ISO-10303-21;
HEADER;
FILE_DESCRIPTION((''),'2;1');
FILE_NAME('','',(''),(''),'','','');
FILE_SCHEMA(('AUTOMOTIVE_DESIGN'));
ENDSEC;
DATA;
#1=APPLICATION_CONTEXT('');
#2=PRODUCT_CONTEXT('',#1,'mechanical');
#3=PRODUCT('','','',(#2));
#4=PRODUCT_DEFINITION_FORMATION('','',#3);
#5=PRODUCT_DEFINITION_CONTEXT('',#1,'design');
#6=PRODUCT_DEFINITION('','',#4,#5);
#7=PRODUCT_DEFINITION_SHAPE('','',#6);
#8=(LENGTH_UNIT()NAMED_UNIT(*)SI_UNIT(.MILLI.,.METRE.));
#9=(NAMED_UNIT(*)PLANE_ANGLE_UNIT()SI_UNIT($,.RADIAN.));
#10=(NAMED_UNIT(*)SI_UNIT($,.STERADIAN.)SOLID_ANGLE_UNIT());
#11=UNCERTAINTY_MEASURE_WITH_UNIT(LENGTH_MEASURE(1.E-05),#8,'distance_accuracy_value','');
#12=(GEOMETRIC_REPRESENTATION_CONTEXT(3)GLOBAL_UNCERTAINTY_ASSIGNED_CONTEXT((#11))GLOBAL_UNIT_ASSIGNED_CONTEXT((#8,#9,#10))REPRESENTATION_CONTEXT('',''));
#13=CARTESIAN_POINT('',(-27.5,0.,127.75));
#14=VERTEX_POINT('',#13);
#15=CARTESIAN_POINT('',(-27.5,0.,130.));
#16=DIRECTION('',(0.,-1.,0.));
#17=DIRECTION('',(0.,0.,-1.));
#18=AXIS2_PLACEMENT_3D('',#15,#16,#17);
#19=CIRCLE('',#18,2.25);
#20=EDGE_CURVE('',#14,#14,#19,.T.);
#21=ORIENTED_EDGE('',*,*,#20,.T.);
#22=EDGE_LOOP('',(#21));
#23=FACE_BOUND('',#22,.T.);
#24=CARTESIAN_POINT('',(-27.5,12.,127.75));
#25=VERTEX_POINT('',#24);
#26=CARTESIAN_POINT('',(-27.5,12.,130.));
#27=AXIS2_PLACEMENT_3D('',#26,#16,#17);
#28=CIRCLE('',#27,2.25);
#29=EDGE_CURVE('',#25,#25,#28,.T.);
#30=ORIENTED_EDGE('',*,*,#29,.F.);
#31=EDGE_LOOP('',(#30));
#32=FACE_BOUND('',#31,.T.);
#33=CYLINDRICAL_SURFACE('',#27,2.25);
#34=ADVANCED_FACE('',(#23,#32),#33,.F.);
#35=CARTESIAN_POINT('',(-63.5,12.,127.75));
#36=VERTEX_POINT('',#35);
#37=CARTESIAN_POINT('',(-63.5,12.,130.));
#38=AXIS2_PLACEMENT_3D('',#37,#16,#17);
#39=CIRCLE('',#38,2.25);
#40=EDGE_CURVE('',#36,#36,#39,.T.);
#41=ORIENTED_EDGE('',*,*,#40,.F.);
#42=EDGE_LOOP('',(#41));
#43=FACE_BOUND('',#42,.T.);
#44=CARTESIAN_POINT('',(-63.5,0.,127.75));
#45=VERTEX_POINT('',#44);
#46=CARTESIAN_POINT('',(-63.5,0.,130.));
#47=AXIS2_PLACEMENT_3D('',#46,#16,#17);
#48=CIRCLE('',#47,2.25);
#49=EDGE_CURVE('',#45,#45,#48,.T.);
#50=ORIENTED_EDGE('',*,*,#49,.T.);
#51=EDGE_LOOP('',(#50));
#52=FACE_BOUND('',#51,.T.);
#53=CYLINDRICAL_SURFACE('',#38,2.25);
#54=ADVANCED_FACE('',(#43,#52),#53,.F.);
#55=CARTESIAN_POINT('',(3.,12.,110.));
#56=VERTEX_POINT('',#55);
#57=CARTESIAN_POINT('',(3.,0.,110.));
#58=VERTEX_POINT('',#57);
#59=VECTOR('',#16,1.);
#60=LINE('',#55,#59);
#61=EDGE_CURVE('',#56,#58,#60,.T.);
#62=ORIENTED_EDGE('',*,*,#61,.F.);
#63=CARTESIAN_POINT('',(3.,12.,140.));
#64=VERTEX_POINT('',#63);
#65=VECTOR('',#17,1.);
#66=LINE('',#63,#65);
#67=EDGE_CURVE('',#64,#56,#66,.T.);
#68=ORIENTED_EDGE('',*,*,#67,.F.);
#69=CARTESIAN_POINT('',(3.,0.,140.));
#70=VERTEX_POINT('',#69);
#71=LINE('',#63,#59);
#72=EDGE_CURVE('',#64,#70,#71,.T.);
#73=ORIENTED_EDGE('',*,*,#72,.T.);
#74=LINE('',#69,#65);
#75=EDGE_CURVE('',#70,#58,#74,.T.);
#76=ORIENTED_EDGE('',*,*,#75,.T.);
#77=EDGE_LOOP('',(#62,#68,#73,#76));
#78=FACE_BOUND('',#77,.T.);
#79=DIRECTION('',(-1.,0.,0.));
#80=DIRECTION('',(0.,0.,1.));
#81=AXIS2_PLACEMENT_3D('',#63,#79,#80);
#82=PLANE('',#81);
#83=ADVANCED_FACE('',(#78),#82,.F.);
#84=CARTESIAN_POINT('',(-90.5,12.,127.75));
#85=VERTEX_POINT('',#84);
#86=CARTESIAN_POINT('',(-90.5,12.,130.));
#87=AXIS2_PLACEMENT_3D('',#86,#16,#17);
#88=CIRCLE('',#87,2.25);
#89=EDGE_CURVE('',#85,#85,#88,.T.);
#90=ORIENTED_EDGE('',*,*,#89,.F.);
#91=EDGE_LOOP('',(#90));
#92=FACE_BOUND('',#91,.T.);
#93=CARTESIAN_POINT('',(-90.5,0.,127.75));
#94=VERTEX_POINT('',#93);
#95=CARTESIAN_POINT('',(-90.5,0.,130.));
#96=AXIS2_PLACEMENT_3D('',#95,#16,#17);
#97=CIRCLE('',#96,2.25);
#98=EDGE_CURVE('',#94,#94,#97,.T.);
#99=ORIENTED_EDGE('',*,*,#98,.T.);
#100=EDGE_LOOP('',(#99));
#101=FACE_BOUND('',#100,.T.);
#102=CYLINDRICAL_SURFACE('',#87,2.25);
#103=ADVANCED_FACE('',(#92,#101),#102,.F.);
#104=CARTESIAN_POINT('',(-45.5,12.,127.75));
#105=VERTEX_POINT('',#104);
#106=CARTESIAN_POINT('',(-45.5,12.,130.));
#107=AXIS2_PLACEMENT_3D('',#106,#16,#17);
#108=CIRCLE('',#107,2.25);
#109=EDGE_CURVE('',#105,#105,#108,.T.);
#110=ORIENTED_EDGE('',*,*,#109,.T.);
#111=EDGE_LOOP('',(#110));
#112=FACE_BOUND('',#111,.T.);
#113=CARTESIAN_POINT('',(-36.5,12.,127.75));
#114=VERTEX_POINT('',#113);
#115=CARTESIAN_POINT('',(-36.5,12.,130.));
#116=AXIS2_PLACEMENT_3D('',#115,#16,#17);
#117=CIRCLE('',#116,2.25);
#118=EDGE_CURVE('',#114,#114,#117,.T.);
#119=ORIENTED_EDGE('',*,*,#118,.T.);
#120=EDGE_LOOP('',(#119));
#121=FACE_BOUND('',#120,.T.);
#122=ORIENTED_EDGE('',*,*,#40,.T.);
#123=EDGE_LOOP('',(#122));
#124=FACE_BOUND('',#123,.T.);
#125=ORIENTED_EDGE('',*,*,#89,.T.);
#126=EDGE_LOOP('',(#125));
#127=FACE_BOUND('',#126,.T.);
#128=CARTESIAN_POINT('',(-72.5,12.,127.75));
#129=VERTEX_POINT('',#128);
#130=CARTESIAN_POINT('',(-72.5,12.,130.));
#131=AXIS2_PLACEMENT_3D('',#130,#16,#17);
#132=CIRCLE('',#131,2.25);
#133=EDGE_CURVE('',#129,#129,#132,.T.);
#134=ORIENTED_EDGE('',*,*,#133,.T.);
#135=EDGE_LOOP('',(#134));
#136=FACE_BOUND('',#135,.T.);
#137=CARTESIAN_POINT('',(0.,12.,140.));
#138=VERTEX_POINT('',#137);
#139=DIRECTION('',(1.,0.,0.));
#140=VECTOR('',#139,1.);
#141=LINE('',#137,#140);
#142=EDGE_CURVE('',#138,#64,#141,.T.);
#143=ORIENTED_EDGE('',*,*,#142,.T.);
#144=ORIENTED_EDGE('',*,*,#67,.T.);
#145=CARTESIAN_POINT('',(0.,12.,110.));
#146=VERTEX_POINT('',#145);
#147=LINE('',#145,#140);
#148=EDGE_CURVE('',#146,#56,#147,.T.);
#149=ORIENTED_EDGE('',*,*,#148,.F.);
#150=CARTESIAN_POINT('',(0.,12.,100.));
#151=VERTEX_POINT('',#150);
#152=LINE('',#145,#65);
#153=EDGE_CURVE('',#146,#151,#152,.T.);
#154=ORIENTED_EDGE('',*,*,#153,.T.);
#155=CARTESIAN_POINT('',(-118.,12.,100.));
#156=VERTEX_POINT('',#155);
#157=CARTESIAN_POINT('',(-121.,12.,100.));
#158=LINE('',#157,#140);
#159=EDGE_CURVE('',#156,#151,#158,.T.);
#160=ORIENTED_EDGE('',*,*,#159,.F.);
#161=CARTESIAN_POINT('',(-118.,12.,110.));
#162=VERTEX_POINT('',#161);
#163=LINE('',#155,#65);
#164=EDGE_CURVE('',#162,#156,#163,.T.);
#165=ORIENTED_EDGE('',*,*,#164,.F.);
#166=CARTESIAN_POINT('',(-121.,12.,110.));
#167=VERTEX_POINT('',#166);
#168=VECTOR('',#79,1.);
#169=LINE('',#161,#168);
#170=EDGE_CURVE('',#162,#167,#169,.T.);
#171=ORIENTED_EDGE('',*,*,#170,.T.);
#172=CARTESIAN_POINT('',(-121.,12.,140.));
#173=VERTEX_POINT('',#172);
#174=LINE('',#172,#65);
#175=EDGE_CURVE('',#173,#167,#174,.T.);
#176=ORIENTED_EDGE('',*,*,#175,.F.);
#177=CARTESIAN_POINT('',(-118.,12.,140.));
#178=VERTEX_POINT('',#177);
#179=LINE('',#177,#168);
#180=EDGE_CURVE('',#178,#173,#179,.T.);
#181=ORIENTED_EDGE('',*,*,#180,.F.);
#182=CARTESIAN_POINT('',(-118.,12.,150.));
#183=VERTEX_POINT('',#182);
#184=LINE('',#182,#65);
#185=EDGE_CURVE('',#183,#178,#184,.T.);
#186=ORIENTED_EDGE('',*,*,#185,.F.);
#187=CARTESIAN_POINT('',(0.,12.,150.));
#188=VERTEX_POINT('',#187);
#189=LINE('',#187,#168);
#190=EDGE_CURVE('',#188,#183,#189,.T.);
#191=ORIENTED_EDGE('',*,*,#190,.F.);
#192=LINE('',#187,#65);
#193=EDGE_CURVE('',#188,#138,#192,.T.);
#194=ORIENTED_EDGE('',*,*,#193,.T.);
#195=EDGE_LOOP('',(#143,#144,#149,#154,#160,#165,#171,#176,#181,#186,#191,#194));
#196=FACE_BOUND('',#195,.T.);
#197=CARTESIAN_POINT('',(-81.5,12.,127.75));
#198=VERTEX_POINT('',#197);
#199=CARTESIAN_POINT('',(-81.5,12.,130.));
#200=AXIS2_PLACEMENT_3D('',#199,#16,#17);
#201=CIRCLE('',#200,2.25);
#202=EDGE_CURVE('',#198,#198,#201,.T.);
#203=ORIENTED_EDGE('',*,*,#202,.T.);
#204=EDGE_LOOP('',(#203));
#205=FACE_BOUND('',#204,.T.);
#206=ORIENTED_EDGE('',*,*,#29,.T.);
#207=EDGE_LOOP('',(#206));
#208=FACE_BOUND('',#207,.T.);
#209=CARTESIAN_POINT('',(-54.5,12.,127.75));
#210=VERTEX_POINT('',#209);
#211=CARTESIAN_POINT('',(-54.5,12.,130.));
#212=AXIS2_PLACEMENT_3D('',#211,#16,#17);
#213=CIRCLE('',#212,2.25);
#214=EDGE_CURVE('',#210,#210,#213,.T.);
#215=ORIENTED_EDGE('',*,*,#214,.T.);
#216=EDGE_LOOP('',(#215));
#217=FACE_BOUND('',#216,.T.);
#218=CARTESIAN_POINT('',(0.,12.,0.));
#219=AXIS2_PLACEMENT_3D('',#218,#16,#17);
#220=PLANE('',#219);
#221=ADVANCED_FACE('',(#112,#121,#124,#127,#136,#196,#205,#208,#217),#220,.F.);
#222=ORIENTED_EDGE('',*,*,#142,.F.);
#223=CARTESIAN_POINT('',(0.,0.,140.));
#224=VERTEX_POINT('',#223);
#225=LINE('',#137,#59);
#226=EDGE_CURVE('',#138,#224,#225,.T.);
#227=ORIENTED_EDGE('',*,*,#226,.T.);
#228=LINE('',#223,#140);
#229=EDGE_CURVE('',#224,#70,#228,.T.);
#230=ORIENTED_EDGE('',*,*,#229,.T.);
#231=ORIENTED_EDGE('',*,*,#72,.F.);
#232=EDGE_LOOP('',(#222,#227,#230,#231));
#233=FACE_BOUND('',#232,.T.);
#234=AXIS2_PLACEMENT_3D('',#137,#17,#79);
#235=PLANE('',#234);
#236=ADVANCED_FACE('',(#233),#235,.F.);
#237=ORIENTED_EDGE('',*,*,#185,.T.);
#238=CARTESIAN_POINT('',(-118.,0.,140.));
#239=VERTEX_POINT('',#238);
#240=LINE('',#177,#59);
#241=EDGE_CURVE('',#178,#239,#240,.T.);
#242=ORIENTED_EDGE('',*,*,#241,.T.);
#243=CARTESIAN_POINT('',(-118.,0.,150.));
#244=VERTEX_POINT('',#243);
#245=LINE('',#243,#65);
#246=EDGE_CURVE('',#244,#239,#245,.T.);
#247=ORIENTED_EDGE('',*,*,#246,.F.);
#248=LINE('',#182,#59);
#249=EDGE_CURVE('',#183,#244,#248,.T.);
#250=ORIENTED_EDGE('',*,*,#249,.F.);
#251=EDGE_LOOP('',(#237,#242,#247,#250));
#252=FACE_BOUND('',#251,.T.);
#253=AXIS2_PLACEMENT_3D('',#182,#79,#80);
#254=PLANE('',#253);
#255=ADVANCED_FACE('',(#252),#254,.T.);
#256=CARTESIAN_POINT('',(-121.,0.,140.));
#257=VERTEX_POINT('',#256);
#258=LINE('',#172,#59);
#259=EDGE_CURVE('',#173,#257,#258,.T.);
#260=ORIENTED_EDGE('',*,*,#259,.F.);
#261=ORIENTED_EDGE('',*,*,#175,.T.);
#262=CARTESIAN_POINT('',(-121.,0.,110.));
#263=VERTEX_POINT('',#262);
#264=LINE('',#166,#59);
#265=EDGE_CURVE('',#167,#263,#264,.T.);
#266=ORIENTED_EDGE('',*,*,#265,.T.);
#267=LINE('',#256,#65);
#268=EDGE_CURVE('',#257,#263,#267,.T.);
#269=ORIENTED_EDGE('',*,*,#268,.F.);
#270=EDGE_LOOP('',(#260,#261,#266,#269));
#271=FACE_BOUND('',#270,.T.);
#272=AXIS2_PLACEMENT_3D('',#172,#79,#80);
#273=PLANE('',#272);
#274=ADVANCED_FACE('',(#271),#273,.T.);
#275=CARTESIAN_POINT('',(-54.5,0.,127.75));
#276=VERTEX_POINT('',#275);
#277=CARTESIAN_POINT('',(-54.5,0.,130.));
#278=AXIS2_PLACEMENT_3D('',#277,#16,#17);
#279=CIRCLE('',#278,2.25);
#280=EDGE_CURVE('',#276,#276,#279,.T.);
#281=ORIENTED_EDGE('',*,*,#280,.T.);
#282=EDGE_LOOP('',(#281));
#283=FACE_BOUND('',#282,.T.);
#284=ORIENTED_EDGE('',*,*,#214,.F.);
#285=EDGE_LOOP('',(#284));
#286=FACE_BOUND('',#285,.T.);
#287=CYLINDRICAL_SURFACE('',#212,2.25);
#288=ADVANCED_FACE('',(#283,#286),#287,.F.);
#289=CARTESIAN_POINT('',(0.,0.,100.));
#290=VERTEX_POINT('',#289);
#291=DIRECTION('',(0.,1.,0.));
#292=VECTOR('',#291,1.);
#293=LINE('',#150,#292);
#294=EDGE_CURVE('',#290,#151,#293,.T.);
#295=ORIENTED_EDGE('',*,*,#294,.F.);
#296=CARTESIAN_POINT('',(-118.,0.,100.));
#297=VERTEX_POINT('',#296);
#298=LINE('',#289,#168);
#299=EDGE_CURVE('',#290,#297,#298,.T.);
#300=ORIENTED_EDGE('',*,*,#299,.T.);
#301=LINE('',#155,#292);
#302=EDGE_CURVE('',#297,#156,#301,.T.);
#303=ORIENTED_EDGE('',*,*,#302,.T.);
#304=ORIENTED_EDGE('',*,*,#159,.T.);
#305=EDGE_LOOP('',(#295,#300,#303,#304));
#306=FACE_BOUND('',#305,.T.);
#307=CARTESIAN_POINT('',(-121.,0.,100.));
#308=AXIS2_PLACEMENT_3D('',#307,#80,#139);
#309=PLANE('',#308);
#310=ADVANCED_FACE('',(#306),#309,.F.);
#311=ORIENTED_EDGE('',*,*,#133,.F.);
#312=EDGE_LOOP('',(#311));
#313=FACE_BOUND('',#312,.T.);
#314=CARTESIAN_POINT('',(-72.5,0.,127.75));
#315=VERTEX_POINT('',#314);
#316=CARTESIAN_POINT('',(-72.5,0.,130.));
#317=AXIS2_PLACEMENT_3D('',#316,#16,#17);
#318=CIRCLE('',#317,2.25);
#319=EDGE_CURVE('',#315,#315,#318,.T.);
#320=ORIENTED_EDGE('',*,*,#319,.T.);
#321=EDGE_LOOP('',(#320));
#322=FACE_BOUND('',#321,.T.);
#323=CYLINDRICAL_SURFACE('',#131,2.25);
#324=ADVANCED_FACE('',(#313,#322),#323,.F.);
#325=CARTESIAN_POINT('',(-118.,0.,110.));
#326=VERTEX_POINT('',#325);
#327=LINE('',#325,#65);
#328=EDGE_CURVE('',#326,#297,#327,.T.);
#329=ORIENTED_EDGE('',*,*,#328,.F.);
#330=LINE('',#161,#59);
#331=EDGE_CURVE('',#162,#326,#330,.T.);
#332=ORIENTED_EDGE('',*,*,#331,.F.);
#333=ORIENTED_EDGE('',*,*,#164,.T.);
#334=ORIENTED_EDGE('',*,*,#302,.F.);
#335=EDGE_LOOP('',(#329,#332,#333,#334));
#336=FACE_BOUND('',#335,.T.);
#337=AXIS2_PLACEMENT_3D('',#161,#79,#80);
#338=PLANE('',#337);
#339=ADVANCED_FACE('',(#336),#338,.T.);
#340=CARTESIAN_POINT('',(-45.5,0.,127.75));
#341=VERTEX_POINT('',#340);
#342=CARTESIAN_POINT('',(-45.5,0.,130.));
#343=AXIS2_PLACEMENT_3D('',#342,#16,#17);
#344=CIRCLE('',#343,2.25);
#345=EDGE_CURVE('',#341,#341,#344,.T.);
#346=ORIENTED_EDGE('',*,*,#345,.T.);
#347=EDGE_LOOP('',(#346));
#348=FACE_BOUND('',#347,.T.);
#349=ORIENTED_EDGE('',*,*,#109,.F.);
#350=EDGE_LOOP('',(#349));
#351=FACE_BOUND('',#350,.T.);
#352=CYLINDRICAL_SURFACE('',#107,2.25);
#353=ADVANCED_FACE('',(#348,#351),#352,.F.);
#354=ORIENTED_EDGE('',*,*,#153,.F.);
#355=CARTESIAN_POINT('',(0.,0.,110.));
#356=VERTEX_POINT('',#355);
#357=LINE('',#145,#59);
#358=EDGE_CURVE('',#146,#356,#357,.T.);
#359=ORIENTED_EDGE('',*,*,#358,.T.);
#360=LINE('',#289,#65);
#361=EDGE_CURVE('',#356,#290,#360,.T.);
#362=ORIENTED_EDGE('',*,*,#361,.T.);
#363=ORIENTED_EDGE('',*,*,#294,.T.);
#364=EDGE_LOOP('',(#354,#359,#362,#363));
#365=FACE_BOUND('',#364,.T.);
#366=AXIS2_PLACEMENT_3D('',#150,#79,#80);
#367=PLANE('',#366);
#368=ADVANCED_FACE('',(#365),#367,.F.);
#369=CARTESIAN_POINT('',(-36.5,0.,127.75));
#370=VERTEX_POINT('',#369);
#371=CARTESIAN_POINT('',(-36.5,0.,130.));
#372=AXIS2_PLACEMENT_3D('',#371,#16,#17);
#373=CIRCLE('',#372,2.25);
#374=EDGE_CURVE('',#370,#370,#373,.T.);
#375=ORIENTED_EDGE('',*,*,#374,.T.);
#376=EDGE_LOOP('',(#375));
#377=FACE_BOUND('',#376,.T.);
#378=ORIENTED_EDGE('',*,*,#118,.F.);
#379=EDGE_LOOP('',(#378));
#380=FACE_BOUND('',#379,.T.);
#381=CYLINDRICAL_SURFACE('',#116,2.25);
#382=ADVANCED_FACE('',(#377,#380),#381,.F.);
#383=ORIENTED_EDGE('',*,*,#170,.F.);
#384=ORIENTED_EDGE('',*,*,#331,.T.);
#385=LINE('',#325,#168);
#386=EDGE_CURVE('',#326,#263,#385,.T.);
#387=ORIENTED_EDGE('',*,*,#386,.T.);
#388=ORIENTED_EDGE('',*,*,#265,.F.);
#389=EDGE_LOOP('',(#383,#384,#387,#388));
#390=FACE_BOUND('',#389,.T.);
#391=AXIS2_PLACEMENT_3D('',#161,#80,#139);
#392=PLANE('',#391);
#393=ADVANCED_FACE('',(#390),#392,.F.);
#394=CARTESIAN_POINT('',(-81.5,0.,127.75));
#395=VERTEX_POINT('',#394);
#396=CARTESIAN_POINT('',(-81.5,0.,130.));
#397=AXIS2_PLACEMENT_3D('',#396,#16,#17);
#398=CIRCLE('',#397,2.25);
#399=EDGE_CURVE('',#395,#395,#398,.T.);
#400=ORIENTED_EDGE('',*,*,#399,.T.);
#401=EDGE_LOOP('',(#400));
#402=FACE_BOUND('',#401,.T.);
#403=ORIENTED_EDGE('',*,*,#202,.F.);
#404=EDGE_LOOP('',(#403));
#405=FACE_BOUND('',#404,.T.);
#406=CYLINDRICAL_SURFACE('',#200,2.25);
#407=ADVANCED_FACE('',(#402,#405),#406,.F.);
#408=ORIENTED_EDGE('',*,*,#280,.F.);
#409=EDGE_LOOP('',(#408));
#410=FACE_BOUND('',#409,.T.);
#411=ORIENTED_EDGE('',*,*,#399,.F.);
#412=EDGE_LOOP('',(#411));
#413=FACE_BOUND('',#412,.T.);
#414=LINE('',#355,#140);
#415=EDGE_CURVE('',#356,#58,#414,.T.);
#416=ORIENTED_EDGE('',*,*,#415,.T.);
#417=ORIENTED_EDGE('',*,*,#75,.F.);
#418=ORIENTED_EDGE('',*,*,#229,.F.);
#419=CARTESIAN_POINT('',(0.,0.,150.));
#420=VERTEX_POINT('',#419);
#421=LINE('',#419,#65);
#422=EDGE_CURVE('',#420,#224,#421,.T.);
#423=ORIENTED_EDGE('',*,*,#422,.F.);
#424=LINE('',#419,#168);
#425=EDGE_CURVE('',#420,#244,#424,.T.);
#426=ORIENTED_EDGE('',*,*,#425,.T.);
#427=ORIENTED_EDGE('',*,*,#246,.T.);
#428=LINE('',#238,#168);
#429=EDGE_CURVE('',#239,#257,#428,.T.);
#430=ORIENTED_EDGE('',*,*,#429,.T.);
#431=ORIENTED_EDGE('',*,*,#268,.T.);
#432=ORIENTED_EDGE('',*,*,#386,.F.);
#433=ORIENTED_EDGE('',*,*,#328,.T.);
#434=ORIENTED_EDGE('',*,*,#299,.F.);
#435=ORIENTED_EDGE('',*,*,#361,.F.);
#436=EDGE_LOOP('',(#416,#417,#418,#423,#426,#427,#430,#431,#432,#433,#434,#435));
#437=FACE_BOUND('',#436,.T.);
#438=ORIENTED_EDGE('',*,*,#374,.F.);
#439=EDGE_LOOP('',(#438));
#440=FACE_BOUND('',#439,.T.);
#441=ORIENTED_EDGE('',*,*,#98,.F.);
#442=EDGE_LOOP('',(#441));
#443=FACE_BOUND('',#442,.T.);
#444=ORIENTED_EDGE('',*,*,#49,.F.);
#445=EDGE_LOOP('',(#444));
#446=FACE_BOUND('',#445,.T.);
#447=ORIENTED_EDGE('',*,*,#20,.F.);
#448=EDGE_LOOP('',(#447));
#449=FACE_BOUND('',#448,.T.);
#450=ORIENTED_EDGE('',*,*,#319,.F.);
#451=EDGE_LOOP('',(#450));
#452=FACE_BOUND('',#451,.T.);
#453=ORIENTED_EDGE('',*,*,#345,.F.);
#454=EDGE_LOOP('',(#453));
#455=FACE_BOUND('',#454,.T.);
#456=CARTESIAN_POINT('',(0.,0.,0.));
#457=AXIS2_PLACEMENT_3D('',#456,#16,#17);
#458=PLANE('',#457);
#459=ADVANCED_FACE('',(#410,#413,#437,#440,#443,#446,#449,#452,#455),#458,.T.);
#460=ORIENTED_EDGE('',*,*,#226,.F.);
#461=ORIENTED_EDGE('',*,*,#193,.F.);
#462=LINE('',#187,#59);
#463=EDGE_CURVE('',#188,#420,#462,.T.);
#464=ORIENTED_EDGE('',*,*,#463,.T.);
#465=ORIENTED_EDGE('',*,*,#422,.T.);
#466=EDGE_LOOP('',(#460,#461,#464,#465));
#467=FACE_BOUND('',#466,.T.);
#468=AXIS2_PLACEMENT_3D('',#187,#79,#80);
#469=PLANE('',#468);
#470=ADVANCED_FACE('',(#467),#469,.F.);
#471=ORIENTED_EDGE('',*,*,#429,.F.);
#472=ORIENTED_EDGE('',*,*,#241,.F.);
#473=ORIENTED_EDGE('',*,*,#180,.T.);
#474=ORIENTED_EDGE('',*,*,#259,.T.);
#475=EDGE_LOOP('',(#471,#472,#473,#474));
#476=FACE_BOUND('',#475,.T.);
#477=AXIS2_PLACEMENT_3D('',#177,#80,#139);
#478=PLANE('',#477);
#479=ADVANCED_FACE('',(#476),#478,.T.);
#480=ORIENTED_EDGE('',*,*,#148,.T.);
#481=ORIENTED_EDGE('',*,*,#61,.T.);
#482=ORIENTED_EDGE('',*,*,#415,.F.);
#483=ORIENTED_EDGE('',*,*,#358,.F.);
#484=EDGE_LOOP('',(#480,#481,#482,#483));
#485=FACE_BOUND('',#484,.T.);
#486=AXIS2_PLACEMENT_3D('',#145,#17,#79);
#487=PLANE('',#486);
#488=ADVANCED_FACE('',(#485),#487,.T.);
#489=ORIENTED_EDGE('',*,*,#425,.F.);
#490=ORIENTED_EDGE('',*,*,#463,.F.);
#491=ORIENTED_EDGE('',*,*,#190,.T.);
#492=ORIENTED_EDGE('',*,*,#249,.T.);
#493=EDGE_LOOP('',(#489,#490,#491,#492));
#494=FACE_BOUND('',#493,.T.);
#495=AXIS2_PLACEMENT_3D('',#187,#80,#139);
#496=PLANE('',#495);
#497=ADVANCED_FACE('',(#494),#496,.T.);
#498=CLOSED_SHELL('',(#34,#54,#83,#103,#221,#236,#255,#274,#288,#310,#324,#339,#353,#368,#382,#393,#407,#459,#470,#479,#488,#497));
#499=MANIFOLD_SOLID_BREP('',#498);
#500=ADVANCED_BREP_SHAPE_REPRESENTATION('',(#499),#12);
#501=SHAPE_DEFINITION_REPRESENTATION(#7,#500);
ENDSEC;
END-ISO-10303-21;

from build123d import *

# Parameters (mm, degrees)
IMPORTED_BODY_2_1_OUTLINE_R = 2.25
IMPORTED_BODY_2_1_DEPTH     = 12
SKETCH_2_W                  = 124
SKETCH_2_H                  = 100
CUT_EXTRUDE_1_DEPTH         = 12


# Read off the part's stored shape, not the designer's step: 基体零件-零件2-1
with BuildPart() as part:
    # 基体零件-零件2-1 outline → 基体零件-零件2-1 (new body)
    with BuildSketch(Plane(origin=(0, 0, 0), x_dir=(1, 0, 0), z_dir=(0, 1, 0))):
        Polygon((0, -150), (0, -140), (3, -140), (3, -110), (0, -110), (0, -90), (3, -90), (3, -60), (0, -60), (0, -40), (3, -40), (3, -10), (0, -10), (0, 0), (-118, 0), (-118, -10), (-121, -10), (-121, -40), (-118, -40), (-118, -60), (-121, -60), (-121, -90), (-118, -90), (-118, -110), (-121, -110), (-121, -140), (-118, -140), (-118, -150), align=None)
        with Locations((-90.5, -130)):
            Circle(IMPORTED_BODY_2_1_OUTLINE_R, mode=Mode.SUBTRACT)
        with Locations((-81.5, -130)):
            Circle(IMPORTED_BODY_2_1_OUTLINE_R, mode=Mode.SUBTRACT)
        with Locations((-72.5, -130)):
            Circle(IMPORTED_BODY_2_1_OUTLINE_R, mode=Mode.SUBTRACT)
        with Locations((-63.5, -130)):
            Circle(IMPORTED_BODY_2_1_OUTLINE_R, mode=Mode.SUBTRACT)
        with Locations((-54.5, -130)):
            Circle(IMPORTED_BODY_2_1_OUTLINE_R, mode=Mode.SUBTRACT)
        with Locations((-45.5, -130)):
            Circle(IMPORTED_BODY_2_1_OUTLINE_R, mode=Mode.SUBTRACT)
        with Locations((-36.5, -130)):
            Circle(IMPORTED_BODY_2_1_OUTLINE_R, mode=Mode.SUBTRACT)
        with Locations((-27.5, -130)):
            Circle(IMPORTED_BODY_2_1_OUTLINE_R, mode=Mode.SUBTRACT)
    extrude(amount=IMPORTED_BODY_2_1_DEPTH)

    # 草图2 → 切除-拉伸1 (cut)
    with BuildSketch(Plane(origin=(0, 12, 0), x_dir=(1, 0, 0), z_dir=(0, 1, 0))):
        with Locations((-59, -50)):
            Rectangle(SKETCH_2_W, SKETCH_2_H)
    extrude(amount=-CUT_EXTRUDE_1_DEPTH, mode=Mode.SUBTRACT)


solid = part.part
